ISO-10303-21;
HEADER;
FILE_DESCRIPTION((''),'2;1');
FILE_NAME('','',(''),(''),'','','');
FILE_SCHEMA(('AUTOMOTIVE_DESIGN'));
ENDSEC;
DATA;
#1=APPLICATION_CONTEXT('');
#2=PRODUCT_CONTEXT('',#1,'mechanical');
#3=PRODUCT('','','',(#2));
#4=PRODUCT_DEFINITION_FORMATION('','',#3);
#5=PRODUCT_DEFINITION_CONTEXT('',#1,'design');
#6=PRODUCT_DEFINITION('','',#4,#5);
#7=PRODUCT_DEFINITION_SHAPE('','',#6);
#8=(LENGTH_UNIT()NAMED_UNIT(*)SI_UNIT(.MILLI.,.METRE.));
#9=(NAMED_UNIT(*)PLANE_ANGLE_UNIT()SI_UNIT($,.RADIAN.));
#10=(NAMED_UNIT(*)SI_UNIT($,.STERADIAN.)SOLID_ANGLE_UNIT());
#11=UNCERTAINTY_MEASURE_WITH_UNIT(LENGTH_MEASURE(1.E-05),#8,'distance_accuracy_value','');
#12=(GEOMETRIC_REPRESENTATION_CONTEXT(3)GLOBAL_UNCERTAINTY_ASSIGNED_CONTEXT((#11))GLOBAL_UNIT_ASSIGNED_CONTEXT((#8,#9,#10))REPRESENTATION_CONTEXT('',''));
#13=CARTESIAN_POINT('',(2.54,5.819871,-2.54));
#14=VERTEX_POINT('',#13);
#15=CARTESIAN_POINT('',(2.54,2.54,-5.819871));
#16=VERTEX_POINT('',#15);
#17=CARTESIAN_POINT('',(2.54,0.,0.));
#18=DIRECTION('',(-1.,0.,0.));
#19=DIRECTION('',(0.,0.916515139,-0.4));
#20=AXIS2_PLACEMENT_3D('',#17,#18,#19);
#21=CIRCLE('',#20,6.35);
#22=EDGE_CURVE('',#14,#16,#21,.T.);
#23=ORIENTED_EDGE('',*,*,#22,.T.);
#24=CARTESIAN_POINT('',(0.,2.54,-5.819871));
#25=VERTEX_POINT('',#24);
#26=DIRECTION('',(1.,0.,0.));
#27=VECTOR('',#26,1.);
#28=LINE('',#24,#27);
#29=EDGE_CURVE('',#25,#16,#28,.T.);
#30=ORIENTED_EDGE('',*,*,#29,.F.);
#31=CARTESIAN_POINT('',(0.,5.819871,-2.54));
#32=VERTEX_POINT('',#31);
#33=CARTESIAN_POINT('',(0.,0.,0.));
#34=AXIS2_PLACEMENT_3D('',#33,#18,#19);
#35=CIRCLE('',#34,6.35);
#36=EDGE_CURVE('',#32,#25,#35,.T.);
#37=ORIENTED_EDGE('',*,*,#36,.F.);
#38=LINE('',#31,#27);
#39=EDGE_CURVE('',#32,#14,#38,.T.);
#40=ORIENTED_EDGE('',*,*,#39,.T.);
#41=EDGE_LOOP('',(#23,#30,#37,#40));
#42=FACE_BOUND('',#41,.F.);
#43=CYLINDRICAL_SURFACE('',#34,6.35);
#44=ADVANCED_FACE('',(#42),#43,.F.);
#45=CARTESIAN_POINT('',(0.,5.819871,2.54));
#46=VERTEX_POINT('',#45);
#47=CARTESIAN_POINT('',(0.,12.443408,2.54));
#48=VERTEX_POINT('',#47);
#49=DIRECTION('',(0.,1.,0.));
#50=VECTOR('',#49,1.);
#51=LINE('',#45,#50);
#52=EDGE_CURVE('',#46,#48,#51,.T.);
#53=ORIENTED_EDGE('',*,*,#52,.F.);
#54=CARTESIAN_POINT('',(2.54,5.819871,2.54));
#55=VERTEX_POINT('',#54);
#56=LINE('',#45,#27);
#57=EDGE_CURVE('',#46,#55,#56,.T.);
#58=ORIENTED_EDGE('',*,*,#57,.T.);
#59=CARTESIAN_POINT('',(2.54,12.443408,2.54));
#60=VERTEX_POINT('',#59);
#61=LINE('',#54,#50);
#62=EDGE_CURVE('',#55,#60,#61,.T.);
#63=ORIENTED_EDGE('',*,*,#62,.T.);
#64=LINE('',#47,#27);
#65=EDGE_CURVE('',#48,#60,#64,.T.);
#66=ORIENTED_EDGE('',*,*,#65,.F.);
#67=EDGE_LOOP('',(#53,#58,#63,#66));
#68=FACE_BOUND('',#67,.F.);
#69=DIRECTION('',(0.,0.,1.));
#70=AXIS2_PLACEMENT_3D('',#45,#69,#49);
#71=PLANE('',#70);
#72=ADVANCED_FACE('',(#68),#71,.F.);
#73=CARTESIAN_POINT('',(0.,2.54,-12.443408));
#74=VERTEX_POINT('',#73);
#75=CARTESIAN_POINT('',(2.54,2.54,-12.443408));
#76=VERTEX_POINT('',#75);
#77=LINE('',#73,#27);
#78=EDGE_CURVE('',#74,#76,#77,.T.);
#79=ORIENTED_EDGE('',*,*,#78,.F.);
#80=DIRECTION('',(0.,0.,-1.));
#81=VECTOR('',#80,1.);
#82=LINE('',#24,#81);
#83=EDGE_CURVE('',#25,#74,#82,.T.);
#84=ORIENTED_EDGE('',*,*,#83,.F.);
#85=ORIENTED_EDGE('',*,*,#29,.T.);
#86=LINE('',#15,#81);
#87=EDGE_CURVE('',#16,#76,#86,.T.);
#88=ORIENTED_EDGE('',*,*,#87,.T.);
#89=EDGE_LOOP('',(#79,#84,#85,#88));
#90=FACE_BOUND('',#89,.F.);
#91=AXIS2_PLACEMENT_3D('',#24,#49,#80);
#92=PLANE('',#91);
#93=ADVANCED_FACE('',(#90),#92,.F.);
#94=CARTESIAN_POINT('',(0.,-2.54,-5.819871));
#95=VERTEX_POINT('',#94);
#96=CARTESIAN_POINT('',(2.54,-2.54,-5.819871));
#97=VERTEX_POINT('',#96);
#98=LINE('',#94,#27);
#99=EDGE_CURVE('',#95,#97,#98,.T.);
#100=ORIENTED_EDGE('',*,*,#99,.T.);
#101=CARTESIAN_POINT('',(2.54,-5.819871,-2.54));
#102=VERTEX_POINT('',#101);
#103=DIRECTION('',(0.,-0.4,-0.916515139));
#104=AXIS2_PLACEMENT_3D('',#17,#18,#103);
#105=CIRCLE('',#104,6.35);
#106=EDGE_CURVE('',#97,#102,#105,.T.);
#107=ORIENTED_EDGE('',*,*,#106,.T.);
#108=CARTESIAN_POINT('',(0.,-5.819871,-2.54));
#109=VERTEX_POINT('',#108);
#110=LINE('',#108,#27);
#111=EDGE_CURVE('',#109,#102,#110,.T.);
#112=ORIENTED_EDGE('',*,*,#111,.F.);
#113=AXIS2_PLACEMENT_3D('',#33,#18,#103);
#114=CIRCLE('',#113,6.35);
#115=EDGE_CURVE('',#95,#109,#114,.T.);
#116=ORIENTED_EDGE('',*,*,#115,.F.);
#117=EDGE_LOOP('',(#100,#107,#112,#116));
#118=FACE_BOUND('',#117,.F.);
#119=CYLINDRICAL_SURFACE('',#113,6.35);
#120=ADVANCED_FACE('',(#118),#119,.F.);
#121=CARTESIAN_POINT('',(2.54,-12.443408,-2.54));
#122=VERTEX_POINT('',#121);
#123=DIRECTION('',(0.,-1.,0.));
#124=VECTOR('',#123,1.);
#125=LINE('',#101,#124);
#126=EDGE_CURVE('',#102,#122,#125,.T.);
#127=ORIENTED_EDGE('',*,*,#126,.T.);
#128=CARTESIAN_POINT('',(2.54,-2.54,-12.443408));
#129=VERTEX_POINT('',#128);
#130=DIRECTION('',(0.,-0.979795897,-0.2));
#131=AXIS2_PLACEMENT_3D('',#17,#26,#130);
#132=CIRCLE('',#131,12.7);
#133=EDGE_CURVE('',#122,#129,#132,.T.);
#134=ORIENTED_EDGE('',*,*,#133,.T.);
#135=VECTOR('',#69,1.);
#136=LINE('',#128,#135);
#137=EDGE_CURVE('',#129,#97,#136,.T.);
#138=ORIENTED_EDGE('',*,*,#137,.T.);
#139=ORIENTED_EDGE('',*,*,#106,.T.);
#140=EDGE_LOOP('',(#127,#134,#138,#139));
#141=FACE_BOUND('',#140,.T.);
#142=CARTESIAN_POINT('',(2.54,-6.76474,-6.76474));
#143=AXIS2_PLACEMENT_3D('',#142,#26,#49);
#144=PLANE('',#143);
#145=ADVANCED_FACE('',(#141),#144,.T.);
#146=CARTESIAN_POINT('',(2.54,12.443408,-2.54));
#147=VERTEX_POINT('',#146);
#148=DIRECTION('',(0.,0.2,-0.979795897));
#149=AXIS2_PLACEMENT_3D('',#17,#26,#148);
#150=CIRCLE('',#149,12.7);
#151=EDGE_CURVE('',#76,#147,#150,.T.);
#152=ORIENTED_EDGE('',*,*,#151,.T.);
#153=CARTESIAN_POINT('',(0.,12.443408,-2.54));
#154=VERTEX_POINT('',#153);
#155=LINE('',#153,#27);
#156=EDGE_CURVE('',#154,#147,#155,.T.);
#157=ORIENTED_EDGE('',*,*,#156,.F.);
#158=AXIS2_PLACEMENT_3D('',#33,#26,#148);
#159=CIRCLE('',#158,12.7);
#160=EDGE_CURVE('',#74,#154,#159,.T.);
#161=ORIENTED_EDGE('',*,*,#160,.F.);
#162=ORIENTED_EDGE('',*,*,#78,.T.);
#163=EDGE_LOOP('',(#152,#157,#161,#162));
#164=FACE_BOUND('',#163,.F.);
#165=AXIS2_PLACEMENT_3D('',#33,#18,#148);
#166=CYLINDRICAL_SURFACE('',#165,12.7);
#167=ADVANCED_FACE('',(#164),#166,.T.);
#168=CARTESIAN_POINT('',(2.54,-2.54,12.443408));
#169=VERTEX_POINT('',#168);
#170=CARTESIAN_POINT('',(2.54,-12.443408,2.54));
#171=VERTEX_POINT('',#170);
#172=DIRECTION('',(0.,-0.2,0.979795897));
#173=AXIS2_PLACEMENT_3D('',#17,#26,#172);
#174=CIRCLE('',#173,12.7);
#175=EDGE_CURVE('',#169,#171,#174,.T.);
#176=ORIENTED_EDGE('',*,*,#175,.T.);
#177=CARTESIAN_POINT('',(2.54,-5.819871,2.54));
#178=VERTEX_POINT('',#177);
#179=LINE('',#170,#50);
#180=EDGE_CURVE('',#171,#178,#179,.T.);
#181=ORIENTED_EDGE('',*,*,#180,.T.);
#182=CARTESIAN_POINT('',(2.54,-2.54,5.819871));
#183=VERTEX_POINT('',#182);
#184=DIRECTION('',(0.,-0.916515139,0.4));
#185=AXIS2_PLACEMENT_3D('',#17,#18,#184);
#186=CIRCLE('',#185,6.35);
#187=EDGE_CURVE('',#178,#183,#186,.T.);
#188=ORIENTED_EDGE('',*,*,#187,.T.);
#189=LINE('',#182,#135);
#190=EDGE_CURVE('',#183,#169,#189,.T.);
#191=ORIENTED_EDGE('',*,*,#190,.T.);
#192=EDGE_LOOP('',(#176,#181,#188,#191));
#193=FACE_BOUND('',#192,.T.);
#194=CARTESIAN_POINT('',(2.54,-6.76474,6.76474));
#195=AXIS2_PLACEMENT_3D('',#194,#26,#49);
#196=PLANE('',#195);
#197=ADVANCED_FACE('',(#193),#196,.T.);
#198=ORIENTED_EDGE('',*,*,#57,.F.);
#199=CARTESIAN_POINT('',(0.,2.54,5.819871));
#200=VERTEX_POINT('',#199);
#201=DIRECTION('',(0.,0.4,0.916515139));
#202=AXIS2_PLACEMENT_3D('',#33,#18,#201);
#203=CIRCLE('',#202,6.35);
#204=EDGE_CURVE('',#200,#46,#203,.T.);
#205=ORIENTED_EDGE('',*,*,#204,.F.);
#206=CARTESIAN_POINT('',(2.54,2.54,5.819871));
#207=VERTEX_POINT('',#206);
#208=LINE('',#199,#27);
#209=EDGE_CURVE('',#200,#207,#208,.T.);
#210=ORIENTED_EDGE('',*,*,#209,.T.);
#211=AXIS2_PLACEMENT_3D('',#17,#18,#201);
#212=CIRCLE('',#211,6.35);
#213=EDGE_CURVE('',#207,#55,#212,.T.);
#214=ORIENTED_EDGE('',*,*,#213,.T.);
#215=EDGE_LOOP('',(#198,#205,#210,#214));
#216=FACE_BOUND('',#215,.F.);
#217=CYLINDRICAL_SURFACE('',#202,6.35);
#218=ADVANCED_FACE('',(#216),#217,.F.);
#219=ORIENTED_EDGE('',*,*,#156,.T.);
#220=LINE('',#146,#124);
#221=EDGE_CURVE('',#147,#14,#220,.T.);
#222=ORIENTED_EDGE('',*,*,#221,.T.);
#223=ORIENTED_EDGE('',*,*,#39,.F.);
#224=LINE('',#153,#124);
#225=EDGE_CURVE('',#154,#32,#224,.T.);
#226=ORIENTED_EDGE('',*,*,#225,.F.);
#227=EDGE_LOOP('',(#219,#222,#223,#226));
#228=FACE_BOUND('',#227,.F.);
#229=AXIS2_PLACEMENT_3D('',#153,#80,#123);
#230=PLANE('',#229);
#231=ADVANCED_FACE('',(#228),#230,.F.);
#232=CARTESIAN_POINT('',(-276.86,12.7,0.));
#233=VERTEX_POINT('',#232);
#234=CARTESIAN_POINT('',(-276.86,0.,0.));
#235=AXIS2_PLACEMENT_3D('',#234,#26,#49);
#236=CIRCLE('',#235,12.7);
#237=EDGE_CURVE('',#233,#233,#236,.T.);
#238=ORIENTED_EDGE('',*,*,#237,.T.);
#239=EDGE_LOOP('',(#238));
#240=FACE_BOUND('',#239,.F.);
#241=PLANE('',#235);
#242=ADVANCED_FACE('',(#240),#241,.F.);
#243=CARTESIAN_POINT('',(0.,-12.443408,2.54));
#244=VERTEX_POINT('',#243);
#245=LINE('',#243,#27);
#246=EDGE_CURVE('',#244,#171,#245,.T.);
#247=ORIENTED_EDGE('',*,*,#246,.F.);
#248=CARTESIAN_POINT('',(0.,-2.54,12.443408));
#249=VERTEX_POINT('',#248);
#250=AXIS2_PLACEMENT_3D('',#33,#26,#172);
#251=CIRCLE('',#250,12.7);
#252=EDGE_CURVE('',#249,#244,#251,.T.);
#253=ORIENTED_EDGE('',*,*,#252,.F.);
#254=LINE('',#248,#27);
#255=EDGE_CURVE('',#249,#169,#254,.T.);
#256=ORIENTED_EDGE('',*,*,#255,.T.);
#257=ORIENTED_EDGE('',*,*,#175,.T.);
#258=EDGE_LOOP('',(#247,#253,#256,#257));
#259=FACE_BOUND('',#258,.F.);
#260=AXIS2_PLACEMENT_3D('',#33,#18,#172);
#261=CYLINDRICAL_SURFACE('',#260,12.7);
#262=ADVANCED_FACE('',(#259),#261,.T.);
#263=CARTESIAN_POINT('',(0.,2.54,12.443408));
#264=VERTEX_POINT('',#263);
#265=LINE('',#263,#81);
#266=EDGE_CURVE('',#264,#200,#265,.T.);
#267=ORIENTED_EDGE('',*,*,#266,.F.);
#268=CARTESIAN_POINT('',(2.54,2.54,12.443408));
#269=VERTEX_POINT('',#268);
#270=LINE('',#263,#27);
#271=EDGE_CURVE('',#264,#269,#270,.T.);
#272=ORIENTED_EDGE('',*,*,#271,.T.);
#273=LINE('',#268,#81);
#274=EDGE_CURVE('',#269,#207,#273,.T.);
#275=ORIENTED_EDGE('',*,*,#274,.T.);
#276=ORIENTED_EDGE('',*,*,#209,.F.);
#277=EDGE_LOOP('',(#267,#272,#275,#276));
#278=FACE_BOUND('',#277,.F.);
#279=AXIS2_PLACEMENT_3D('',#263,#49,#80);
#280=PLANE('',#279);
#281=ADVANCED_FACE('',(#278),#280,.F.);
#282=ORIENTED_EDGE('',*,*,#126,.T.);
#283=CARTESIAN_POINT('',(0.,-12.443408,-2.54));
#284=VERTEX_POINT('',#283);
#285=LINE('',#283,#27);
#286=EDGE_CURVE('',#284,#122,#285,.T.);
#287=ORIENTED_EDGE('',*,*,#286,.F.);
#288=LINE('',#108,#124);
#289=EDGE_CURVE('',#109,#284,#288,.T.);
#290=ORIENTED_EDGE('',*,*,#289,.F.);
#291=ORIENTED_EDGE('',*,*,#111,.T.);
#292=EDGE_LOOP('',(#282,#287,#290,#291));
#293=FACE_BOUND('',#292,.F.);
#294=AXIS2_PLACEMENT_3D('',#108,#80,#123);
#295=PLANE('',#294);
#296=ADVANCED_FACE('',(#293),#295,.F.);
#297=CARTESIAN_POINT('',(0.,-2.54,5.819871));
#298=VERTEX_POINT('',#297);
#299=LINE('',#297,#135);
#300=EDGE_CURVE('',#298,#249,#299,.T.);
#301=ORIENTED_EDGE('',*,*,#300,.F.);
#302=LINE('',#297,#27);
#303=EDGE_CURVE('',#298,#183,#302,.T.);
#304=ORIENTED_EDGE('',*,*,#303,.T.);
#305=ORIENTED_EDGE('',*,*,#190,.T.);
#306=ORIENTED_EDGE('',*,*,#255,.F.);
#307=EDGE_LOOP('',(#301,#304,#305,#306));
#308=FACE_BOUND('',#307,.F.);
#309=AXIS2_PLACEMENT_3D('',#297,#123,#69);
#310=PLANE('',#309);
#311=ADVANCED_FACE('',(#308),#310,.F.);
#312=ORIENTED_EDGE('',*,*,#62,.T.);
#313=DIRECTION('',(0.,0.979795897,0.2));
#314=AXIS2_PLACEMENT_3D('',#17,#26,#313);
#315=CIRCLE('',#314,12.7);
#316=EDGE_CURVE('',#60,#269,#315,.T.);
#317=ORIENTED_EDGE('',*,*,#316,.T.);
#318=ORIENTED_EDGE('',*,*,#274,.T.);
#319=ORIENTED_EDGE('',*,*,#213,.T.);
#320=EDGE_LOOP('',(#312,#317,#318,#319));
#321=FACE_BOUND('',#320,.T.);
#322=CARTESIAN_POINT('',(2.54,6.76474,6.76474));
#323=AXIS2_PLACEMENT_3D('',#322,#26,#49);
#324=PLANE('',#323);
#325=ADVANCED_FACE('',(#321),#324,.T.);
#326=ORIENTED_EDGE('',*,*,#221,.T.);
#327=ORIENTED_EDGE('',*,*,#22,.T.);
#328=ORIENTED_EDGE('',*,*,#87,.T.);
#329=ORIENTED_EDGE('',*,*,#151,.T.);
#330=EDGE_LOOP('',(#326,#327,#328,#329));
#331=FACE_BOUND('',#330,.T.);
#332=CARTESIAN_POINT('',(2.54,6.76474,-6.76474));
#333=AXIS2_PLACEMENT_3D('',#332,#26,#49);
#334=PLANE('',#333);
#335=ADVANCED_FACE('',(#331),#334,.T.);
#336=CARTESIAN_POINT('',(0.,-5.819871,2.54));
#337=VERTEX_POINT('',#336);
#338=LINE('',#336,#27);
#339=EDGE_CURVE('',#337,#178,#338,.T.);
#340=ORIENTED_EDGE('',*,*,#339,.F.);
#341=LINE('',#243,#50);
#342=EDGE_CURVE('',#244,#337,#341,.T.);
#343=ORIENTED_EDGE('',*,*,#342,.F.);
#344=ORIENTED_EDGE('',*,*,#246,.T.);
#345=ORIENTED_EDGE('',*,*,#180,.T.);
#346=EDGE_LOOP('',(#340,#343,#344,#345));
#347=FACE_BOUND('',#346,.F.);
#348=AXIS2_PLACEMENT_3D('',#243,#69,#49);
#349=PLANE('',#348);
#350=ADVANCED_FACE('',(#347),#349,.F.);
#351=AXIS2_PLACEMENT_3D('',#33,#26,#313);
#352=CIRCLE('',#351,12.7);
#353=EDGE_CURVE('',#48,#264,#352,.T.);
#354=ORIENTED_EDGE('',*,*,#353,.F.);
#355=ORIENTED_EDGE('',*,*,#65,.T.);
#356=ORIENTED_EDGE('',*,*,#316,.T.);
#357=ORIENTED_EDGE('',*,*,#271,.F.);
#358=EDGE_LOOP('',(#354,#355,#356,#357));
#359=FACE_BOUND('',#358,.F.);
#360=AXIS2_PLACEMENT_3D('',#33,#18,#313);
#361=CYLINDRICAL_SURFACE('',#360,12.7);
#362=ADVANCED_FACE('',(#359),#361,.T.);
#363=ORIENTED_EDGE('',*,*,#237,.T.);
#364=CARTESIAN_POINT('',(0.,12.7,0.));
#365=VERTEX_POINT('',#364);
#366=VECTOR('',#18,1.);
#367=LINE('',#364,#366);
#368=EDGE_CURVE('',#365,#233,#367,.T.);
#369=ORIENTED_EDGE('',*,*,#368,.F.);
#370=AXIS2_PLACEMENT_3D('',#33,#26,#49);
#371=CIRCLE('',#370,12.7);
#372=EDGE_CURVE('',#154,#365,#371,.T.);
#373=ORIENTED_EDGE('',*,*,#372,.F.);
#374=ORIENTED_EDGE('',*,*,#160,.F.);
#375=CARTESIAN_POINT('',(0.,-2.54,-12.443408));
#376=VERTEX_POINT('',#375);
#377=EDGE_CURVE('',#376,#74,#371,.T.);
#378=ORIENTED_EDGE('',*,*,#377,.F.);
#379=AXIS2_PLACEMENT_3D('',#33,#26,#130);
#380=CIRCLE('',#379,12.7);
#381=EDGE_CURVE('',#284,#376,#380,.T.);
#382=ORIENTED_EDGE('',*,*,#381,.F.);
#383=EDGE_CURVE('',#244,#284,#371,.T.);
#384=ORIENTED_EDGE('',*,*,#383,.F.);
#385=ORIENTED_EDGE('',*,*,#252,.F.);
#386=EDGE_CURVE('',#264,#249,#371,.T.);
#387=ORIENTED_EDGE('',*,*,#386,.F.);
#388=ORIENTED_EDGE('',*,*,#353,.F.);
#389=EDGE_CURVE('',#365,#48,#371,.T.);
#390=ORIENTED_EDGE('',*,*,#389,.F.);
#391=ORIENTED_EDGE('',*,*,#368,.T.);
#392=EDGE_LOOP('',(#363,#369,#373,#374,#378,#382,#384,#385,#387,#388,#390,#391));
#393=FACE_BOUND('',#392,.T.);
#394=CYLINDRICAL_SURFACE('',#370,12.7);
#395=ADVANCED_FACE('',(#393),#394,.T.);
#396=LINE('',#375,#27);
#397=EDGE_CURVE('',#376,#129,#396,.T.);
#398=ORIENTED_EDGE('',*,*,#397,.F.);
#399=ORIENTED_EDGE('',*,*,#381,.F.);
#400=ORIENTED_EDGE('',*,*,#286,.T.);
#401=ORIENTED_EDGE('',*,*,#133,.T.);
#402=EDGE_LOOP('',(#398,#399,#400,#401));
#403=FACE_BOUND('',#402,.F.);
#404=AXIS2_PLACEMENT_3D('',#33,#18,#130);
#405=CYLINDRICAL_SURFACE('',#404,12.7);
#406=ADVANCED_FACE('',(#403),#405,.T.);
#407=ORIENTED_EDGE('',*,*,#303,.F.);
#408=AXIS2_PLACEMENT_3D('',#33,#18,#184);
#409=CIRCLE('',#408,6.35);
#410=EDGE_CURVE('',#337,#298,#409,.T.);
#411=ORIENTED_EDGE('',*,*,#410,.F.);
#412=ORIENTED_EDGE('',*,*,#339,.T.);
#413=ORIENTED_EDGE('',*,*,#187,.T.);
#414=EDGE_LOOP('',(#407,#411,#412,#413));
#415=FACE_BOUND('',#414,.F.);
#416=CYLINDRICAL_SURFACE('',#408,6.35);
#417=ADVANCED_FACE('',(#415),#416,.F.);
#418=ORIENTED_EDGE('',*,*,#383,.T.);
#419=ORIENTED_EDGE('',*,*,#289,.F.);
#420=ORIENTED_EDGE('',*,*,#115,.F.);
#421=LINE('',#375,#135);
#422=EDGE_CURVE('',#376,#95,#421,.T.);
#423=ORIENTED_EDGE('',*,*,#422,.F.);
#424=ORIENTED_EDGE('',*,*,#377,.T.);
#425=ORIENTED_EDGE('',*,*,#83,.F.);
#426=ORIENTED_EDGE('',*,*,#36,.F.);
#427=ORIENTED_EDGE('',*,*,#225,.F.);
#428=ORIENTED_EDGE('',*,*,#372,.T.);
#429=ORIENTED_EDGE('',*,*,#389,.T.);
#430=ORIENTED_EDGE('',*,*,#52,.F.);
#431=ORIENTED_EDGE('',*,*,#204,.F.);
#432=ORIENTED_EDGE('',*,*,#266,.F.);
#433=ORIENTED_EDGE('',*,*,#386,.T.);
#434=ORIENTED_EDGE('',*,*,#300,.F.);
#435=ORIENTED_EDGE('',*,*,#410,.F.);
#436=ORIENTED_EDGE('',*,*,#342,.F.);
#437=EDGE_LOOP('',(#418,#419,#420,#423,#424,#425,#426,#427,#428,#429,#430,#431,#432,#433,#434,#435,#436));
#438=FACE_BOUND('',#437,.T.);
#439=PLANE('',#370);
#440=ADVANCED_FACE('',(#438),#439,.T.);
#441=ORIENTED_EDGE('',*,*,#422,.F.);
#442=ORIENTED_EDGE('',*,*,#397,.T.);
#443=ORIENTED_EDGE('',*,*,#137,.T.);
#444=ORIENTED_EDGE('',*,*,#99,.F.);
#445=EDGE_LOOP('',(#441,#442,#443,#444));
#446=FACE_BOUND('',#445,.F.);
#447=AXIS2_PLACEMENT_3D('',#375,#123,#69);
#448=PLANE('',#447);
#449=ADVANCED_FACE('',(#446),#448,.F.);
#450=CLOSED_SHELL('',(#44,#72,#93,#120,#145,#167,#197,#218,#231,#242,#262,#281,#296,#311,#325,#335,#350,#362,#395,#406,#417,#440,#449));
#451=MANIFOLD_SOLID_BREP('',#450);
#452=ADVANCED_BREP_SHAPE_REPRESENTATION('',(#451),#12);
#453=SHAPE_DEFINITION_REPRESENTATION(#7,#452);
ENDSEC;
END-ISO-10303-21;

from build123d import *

# Parameters (mm, degrees)
F0_R     = 12.7
F1_DEPTH = 276.86
F3_DEPTH = 2.54


# Not quite as in the source:
# - after a boolean that leaves OpenCascade's solid faulty, fix() repairs it


with BuildPart() as f1:
    # F0 (on Right) → F1 (new body)
    with BuildSketch(Plane.YZ):
        Circle(F0_R)
    extrude(amount=-F1_DEPTH)

    # F2 (on face) → F3 (join)
    with BuildSketch(Plane.YZ):
        with BuildLine():
            ThreePointArc((-5.8198711326, 2.54), (-4.4901280605, 4.4901280605), (-2.54, 5.8198711326))
            Line((-2.54, 5.8198711326), (-2.54, 12.4434078933))
            ThreePointArc((-2.54, 12.4434078933), (-8.9802561211, 8.9802561211), (-12.4434078933, 2.54))
            Line((-12.4434078933, 2.54), (-5.8198711326, 2.54))
        make_face()
        with BuildLine():
            ThreePointArc((2.54, 5.8198711326), (4.4901280605, 4.4901280605), (5.8198711326, 2.54))
            Line((5.8198711326, 2.54), (12.4434078933, 2.54))
            ThreePointArc((12.4434078933, 2.54), (8.9802561211, 8.9802561211), (2.54, 12.4434078933))
            Line((2.54, 12.4434078933), (2.54, 5.8198711326))
        make_face()
        with BuildLine():
            Line((12.4434078933, -2.54), (5.8198711326, -2.54))
            ThreePointArc((5.8198711326, -2.54), (4.4901280605, -4.4901280605), (2.54, -5.8198711326))
            Line((2.54, -5.8198711326), (2.54, -12.4434078933))
            ThreePointArc((2.54, -12.4434078933), (8.9802561211, -8.9802561211), (12.4434078933, -2.54))
        make_face()
        with BuildLine():
            Line((-2.54, -12.4434078933), (-2.54, -5.8198711326))
            ThreePointArc((-2.54, -5.8198711326), (-4.4901280605, -4.4901280605), (-5.8198711326, -2.54))
            Line((-5.8198711326, -2.54), (-12.4434078933, -2.54))
            ThreePointArc((-12.4434078933, -2.54), (-8.9802561211, -8.9802561211), (-2.54, -12.4434078933))
        make_face()
    extrude(amount=F3_DEPTH)

    add(f1.part.fix(), mode=Mode.REPLACE)


solid = f1.part
